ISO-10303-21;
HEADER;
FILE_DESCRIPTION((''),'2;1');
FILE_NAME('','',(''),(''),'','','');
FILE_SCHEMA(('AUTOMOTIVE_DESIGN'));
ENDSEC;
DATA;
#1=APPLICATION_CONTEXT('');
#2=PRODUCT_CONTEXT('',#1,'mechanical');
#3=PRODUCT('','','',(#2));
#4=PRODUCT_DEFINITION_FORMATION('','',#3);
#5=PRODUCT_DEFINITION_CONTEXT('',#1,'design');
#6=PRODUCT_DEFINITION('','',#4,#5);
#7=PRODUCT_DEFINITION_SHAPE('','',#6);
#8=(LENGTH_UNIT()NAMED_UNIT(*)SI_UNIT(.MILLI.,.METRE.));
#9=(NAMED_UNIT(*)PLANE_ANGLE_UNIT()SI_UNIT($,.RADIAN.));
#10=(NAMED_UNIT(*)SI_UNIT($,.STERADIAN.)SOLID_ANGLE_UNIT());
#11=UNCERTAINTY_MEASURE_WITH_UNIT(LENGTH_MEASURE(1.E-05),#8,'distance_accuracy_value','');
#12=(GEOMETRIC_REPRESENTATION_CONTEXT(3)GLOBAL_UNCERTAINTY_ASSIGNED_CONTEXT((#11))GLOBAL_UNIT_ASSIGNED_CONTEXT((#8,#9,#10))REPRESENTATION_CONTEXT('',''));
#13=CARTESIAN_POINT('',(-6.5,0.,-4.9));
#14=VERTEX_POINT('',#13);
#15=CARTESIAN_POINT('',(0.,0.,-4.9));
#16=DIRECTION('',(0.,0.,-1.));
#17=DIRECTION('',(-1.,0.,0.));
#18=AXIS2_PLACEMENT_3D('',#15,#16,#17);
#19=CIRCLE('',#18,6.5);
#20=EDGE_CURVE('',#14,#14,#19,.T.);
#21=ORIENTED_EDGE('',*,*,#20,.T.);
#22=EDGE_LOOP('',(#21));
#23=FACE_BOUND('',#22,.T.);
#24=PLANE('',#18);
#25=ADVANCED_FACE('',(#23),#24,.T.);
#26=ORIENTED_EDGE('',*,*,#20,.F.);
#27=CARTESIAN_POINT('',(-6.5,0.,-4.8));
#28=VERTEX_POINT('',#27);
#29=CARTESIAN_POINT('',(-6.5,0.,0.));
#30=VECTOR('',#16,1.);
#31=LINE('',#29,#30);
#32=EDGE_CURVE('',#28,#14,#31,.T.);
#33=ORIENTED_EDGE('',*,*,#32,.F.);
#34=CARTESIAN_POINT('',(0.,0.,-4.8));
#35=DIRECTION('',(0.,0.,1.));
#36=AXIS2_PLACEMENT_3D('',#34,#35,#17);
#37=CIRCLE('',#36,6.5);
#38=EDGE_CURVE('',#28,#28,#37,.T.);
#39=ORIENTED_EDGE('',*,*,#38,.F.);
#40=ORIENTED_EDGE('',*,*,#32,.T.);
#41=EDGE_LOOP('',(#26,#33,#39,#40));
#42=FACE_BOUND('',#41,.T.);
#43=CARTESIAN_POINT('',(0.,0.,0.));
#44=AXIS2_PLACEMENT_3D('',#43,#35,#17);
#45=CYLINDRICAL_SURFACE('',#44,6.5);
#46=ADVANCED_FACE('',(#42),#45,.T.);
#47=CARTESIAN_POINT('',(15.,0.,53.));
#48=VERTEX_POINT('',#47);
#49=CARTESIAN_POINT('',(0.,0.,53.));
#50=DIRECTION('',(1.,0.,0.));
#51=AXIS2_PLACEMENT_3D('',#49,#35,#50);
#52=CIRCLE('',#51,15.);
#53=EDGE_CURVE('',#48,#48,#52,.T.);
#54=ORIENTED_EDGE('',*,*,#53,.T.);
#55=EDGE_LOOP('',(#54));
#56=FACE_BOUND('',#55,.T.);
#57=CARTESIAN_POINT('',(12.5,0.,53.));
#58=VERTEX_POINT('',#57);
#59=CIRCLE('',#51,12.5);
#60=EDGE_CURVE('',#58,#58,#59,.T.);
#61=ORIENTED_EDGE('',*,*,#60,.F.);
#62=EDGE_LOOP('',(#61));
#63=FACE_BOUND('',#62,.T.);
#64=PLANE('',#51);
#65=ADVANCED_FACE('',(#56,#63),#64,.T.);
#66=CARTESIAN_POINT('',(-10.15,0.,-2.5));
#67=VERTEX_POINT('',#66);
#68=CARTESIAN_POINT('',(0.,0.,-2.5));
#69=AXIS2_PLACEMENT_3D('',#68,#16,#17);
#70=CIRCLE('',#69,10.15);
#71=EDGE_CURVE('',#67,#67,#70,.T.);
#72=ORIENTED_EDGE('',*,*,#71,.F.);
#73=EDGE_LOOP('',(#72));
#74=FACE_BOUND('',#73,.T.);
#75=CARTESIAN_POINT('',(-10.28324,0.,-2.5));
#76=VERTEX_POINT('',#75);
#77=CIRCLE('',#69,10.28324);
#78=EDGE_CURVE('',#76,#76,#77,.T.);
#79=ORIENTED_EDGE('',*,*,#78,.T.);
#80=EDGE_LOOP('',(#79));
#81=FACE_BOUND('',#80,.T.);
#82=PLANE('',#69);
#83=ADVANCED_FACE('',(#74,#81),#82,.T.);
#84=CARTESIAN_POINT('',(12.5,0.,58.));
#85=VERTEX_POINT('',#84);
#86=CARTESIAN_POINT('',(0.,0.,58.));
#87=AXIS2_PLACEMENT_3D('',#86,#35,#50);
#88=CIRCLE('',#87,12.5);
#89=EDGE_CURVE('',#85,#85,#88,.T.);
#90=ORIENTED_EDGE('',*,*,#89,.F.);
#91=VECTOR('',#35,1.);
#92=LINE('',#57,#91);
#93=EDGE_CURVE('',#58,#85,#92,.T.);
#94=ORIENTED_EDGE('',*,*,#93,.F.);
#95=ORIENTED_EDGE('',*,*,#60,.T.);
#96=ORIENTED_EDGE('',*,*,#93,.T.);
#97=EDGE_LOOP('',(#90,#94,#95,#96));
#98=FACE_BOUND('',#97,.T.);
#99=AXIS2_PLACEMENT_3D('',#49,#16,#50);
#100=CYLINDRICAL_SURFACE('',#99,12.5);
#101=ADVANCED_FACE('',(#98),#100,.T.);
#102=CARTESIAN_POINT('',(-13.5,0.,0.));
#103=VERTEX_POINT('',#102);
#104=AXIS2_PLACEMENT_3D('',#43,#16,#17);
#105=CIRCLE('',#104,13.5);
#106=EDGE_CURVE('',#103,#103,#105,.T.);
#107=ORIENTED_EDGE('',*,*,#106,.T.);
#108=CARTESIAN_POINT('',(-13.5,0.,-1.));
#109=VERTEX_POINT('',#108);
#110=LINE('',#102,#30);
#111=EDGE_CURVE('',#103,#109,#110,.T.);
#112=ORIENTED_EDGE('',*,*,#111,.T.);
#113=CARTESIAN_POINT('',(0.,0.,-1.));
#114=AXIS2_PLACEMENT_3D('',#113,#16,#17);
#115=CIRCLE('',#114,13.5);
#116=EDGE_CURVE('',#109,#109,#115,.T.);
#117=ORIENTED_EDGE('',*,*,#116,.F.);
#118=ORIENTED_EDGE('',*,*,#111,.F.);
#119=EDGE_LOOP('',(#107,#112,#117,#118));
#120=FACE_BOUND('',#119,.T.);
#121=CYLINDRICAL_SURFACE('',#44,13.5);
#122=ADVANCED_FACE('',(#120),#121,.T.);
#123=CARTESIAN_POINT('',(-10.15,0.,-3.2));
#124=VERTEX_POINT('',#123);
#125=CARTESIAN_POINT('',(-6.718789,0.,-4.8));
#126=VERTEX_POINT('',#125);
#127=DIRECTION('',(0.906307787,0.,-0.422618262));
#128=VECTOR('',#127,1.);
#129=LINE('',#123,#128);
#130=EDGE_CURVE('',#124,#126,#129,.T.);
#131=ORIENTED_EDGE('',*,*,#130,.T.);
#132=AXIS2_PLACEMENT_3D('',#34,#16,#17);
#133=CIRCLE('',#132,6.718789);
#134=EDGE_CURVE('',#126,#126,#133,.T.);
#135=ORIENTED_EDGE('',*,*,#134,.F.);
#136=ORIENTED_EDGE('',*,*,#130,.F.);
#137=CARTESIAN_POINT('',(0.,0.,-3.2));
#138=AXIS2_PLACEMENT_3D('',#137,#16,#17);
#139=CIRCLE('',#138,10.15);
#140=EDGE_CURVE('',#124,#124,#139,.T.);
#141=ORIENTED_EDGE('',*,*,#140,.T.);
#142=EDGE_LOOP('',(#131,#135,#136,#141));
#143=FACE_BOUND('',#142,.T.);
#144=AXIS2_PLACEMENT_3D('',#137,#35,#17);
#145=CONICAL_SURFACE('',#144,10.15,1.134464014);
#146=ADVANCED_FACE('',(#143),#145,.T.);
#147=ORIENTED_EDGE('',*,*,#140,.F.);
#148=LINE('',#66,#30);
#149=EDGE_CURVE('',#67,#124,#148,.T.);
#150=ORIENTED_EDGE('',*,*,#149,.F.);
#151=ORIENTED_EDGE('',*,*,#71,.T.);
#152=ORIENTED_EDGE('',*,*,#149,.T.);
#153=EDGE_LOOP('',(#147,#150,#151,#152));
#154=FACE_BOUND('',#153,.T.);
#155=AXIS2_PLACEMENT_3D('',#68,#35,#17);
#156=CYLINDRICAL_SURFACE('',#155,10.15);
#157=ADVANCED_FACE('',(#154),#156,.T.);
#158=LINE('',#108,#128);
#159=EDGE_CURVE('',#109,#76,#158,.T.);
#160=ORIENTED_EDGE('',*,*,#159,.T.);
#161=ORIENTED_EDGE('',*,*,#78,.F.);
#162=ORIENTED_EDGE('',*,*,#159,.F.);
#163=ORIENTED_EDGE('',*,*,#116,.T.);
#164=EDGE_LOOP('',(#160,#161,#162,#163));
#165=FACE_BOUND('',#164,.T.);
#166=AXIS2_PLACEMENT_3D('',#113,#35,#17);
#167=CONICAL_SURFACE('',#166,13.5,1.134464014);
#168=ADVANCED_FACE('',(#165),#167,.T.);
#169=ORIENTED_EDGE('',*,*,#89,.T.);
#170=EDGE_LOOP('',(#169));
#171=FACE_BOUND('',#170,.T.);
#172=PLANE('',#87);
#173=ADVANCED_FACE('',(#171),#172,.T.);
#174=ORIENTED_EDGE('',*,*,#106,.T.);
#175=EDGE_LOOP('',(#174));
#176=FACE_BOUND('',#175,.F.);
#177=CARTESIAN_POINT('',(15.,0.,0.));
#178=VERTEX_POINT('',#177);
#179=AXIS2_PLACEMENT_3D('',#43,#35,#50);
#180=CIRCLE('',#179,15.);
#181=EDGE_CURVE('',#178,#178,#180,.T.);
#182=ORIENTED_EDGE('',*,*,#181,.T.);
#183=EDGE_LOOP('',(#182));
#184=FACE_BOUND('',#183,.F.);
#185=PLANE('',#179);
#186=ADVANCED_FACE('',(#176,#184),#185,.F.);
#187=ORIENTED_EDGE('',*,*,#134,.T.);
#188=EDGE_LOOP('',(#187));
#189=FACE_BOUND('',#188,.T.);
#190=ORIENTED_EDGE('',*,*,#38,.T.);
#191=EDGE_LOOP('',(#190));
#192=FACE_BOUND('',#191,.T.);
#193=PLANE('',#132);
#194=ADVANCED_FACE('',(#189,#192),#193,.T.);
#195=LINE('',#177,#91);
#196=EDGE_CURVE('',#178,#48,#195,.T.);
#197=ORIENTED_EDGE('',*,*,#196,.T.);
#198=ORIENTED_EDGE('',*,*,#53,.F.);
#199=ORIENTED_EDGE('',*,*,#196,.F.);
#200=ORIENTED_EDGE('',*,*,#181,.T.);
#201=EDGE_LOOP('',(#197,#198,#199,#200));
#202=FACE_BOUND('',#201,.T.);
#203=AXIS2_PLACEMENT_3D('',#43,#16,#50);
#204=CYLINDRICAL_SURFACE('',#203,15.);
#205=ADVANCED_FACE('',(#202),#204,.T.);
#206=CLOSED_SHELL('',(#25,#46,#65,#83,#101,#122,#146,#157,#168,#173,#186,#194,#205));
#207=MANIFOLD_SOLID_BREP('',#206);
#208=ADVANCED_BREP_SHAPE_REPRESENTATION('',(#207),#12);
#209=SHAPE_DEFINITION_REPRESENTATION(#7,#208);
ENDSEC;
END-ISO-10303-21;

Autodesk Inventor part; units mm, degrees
ref_plane "YZ Plane" through (0, 0, 0) normal (1, 0, 0) x (0, 1, 0)
ref_plane "XZ Plane" through (0, 0, 0) normal (0, 1, 0) x (-1, 0, 0)
ref_plane "XY Plane" through (0, 0, 0) normal (0, 0, 1) x (1, 0, 0)
sketch "Sketch1" plane through (0, 0, 0) normal (0, 0, 1) x (1, 0, 0)
  circle A0 centre (0, 0) radius 15
  dimension "d0" = 30
extrude "Extrusion1" add sketch "Sketch1" along normal blind 53
sketch "Sketch2" plane through (0, 0, 53) normal (0, 0, 1) x (1, 0, 0)
  circle A0 centre (0, 0) radius 12.5
  dimension "d3" = 25
extrude "Extrusion2" add sketch "Sketch2" along normal blind 5
thread "Thread1" size "M25x1" class "6g" standard "ANSI Metric M Profile" length 25.006
sketch "Sketch3" plane through (0, 0, 0) normal (0, 0, -1) x (-1, 0, 0)
  circle A0 centre (0, 0) radius 6.5
  dimension "d8" = 13
extrude "Extrusion3" add sketch "Sketch3" along normal blind 4.9
sketch "Sketch4" plane through (0, 0, 0) normal (0, 0, -1) x (-1, 0, 0)
  circle A0 centre (0, 0) radius 13.5
  dimension "d11" = 27
extrude "Extrusion4" add sketch "Sketch4" along normal blind 2.5
sketch "Sketch5" plane through (0, 0, -2.5) normal (0, 0, -1) x (-1, 0, 0)
  circle A0 centre (0, 0) radius 10.15
  dimension "d14" = 20.3
extrude "Extrusion5" add sketch "Sketch5" along normal blind 2.3
chamfer "Chamfer1" distance 1.5 angle 65 1 edges at (13.5, 0, -2.5) measured on face at (-13.3252, -2.1656, -1.6667)
chamfer "Chamfer2" distance 1.6 angle 65 1 edges at (10.15, 0, -4.8) measured on face at (-10.1171, -0.8167, -4.0333)
ref_plane "Work Plane1" through (0, 0, -6.9) normal (0, 0, -1) x (-1, 0, 0)
sketch "Sketch6" plane through (0, 0, 58) normal (0, 0, 1) x (1, 0, 0)
  circle A0 centre (0, 0) radius 10
  dimension "d24" = 20
extrude "Extrusion6" cut sketch "Sketch6" against normal blind 58
sketch "Sketch7" plane through (0, 0, 0) normal (0, 0, 1) x (1, 0, 0)
  circle A0 centre (0, 0) radius 8
  dimension "d27" = 16
extrude "Extrusion7" cut sketch "Sketch7" against normal blind 2
thicken "Thicken1" operation add thickness 58 both sides no extend neighbours no toward (0, 0, 1) faces at (9.159, -1.4359, 0)
thicken "Thicken2" operation add thickness 60 both sides no extend neighbours no toward (0, 0, 1) faces at (0.9456, 2.4934, -2)
properties part number "Nikon-Objektive-MUC11900_Mockup" material "Stainless Steel"
